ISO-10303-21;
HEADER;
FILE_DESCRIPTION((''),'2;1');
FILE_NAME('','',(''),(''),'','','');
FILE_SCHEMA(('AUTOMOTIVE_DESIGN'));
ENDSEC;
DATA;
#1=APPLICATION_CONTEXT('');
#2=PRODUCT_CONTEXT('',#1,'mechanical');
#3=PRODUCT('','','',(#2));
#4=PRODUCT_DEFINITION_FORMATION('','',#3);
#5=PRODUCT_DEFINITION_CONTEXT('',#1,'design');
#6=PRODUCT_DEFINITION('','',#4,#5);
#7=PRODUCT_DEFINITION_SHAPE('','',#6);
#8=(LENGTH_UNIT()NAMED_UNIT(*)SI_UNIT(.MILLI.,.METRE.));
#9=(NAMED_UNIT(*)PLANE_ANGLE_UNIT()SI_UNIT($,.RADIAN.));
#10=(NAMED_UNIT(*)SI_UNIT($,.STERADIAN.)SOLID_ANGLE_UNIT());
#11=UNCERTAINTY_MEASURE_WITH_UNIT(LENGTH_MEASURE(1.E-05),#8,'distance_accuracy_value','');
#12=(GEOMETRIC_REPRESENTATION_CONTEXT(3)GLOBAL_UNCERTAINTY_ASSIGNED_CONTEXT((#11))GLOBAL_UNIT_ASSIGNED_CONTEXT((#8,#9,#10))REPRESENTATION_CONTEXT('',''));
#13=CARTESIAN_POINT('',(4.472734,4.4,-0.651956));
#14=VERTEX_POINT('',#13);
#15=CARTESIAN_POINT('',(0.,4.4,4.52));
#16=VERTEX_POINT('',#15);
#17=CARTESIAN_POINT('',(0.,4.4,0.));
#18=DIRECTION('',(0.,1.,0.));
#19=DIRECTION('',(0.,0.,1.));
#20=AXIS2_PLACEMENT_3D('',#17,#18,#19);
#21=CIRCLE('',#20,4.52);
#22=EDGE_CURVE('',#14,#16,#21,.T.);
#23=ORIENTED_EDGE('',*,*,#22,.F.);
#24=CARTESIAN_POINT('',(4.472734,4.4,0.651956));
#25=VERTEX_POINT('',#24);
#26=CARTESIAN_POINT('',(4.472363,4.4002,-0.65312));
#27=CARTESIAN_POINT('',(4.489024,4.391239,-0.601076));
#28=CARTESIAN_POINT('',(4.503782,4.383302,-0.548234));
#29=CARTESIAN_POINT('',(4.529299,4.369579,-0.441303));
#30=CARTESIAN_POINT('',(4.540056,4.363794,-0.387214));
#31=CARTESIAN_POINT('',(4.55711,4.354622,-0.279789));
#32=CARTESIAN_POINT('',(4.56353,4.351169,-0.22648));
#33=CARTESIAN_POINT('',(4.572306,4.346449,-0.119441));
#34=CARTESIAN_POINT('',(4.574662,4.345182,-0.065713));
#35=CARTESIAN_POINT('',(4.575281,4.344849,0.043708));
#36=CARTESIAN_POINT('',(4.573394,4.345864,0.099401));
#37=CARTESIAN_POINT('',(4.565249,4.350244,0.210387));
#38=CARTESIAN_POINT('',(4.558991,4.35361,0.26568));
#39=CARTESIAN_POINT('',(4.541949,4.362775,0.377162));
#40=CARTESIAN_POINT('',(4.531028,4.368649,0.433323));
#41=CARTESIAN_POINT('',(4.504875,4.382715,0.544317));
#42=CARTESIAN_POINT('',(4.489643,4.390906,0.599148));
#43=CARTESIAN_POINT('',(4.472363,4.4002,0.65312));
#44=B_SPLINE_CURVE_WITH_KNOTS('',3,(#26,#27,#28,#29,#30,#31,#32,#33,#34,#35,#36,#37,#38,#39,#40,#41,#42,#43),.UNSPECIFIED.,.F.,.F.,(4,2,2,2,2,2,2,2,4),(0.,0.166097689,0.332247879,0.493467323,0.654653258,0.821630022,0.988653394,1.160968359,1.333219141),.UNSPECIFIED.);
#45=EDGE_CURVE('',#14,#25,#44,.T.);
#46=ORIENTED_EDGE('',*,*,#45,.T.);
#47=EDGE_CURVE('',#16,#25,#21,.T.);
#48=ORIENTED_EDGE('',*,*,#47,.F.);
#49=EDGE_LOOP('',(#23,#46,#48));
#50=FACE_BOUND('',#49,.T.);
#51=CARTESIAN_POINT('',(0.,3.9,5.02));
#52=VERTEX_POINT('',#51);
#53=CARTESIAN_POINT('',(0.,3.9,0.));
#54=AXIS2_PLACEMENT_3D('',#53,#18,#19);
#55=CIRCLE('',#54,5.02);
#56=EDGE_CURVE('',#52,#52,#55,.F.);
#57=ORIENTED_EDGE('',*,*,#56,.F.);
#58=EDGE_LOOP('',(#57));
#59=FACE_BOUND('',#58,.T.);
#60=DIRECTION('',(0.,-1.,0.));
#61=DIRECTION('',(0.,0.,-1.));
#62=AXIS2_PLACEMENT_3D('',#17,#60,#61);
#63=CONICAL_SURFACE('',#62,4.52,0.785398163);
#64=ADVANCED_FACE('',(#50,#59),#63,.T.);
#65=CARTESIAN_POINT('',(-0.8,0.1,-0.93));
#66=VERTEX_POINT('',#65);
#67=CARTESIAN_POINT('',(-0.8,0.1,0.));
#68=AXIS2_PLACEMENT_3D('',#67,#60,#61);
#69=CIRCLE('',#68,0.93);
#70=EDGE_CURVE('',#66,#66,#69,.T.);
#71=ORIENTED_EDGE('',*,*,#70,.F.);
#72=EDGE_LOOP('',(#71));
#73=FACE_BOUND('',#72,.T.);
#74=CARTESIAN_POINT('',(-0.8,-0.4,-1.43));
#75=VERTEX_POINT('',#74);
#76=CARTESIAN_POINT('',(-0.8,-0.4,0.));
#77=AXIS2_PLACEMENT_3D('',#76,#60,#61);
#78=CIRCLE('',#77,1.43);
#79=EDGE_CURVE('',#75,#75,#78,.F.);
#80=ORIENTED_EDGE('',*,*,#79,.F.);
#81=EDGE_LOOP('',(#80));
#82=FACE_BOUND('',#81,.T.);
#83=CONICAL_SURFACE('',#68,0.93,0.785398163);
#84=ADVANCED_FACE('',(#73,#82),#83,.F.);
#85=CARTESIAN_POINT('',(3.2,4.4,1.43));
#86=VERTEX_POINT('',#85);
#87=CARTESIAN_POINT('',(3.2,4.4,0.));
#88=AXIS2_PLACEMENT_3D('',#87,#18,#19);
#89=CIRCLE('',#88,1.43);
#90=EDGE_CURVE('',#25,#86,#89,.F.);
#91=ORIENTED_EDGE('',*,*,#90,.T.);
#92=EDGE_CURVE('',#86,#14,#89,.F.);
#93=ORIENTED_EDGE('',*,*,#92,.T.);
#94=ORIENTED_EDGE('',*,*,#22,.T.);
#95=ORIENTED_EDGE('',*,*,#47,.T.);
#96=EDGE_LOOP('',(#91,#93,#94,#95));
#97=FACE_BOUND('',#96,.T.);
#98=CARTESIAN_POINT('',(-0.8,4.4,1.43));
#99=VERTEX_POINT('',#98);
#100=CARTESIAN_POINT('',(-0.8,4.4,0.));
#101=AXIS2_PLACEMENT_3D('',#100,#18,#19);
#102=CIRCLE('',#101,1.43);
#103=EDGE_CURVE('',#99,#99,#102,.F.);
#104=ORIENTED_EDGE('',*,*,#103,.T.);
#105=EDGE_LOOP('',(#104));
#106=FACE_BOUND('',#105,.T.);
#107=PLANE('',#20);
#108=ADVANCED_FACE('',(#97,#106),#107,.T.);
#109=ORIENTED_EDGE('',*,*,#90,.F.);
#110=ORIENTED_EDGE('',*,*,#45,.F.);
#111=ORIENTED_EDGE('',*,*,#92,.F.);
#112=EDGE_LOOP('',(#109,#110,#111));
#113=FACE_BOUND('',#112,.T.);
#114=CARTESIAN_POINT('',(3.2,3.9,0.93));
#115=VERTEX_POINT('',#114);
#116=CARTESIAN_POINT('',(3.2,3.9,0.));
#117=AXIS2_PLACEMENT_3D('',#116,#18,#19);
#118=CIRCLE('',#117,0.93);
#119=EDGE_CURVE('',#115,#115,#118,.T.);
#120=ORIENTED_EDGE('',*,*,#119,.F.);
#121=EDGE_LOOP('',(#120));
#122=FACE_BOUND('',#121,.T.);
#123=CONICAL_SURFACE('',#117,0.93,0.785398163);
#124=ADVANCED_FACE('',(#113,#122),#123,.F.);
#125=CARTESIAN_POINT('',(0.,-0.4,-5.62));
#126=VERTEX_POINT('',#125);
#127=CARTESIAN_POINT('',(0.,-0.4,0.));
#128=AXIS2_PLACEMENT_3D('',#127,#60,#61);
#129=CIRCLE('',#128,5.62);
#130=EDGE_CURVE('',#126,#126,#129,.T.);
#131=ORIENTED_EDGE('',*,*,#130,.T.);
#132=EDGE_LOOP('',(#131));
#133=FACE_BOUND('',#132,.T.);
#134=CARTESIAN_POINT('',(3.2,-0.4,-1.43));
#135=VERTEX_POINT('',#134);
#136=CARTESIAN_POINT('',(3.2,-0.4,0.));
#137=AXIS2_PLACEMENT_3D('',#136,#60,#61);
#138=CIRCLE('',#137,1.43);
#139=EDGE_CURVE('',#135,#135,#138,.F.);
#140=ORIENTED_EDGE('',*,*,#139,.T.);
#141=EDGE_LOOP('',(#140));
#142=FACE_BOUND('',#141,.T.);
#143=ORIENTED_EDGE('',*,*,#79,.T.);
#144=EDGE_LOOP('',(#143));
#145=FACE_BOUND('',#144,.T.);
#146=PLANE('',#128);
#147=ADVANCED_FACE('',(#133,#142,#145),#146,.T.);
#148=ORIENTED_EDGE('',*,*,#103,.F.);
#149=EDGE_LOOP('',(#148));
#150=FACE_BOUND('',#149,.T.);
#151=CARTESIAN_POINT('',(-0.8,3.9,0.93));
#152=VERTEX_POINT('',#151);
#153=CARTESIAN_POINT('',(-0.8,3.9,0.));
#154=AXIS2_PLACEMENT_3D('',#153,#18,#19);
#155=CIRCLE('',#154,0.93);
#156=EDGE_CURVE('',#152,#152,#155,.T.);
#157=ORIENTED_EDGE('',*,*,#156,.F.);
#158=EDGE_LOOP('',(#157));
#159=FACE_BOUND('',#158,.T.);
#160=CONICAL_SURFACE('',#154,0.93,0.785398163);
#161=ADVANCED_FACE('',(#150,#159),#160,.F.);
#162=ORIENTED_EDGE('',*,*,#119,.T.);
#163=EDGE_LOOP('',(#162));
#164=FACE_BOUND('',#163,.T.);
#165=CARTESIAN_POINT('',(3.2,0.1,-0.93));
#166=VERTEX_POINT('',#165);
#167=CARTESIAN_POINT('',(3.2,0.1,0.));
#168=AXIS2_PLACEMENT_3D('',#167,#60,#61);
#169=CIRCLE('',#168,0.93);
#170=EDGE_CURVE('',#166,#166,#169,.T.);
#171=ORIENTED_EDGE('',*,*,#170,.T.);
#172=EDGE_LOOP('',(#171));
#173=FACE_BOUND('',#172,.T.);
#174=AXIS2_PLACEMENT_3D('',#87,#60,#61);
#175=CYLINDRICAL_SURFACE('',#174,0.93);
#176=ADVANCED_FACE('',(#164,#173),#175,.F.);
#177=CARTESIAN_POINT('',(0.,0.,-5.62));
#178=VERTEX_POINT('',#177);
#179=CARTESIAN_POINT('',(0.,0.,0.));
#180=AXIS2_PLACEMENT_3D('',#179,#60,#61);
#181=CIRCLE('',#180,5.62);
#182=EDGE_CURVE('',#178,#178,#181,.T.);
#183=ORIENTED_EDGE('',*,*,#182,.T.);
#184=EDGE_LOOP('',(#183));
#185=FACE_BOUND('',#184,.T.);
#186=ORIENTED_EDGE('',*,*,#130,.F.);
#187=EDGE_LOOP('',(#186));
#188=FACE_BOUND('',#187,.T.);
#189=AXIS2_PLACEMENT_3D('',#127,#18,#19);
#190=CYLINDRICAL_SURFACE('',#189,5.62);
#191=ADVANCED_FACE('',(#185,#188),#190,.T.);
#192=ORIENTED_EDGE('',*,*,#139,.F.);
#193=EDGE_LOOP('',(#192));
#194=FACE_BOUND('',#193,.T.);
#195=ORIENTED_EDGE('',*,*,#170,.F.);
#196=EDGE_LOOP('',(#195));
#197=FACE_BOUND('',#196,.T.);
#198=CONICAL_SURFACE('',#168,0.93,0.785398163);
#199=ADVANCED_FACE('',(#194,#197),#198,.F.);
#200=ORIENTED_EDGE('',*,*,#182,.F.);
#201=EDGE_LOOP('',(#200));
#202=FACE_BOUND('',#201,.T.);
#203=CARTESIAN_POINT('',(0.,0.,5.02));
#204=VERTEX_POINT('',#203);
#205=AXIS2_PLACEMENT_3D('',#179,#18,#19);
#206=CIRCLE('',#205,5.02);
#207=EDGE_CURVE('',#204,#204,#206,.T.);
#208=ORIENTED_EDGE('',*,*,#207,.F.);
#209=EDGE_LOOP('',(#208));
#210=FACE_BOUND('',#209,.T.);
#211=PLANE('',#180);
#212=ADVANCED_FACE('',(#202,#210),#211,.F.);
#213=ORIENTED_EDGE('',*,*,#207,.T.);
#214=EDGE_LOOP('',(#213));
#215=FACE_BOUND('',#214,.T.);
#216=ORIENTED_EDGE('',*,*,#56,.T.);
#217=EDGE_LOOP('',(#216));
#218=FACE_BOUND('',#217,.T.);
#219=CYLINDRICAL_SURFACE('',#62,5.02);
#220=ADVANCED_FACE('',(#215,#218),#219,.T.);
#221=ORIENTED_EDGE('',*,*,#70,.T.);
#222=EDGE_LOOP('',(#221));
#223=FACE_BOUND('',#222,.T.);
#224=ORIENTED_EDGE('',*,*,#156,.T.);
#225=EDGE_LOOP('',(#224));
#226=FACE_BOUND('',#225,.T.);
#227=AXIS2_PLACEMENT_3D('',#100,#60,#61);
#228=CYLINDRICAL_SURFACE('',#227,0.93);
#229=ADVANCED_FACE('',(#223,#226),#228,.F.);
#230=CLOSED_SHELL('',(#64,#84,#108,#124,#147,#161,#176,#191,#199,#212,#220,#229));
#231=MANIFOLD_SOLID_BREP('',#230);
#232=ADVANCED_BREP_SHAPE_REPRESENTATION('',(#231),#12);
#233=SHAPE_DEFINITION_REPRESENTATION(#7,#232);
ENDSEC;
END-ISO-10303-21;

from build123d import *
from build123d.topology import SkipClean

# Parameters (mm, degrees)
SKETCH_1_R      = 5.02
SKETCH_1_R_2    = 0.93
EXTRUDE_1_DEPTH = 4.4
EXTRUDE_START   = 0.4
SKETCH_3_R      = 5.62
SKETCH_3_R_2    = 0.93
EXTRUDE_2_DEPTH = 0.4
CHAMFER_1_SIZE  = 0.5


with BuildPart() as part:
    # 草图1 → 凸台-拉伸1 (new body)
    with BuildSketch(Plane(origin=(0, 0, 0), x_dir=(1, 0, 0), z_dir=(0, 1, 0))):
        with Locations(Location((0, 0, 0), (0, 0, 270))):
            Circle(SKETCH_1_R)
        with Locations(Location((3.2, 0, 0), (0, 0, 270))):
            Circle(SKETCH_1_R_2, mode=Mode.SUBTRACT)
        with Locations(Location((-0.8, 0, 0), (0, 0, 90))):
            Circle(SKETCH_1_R_2, mode=Mode.SUBTRACT)
    extrude(amount=EXTRUDE_1_DEPTH)

    # 草图3 → 凸台-拉伸2 (add)
    with SkipClean():  # the faces are left unmerged after this step: merging them gives an invalid solid
        with BuildSketch(Plane.XZ.offset(EXTRUDE_START)):
            with Locations(Location((0, 0, 0), (0, 0, 270))):
                Circle(SKETCH_3_R)
            with Locations(Location((3.2, 0, 0), (0, 0, 270))):
                Circle(SKETCH_3_R_2, mode=Mode.SUBTRACT)
            with Locations(Location((-0.8, 0, 0), (0, 0, 270))):
                Circle(SKETCH_3_R_2, mode=Mode.SUBTRACT)
        extrude(amount=-EXTRUDE_2_DEPTH)

    # 倒角1
    # the kernel refuses this chamfer: 0.5 mm, written as the material it takes off along each edge
    with BuildSketch(Plane(origin=(3.2, -0.4, 0), x_dir=(0, 0, -1), z_dir=(-1, 0, 0))) as chamfer_1_piece_1:
        Polygon((0.93 + CHAMFER_1_SIZE, 0), (0.93, -CHAMFER_1_SIZE), (0.93, 0), align=None)
    revolve(axis=Axis((3.2, -0.4, 0), (0, -1, 0)), mode=Mode.SUBTRACT)
    with BuildSketch(Plane(origin=(-0.8, -0.4, 0), x_dir=(0, 0, -1), z_dir=(-1, 0, 0))) as chamfer_1_piece_2:
        Polygon((0.93 + CHAMFER_1_SIZE, 0), (0.93, -CHAMFER_1_SIZE), (0.93, 0), align=None)
    revolve(axis=Axis((-0.8, -0.4, 0), (0, -1, 0)), mode=Mode.SUBTRACT)
    with BuildSketch(Plane(origin=(0, 4.4, 0), x_dir=(0, 0, 1), z_dir=(-1, 0, 0))) as chamfer_1_piece_3:
        Polygon((5.02, -CHAMFER_1_SIZE), (5.02 - CHAMFER_1_SIZE, 0), (5.02, 0), align=None)
    revolve(axis=Axis((0, 4.4, 0), (0, 1, 0)), mode=Mode.SUBTRACT)
    with BuildSketch(Plane(origin=(3.2, 4.4, 0), x_dir=(0, 0, 1), z_dir=(-1, 0, 0))) as chamfer_1_piece_4:
        Polygon((0.93 + CHAMFER_1_SIZE, 0), (0.93, -CHAMFER_1_SIZE), (0.93, 0), align=None)
    revolve(axis=Axis((3.2, 4.4, 0), (0, 1, 0)), mode=Mode.SUBTRACT)
    with BuildSketch(Plane(origin=(-0.8, 4.4, 0), x_dir=(0, 0, -1), z_dir=(1, 0, 0))) as chamfer_1_piece_5:
        Polygon((0.93 + CHAMFER_1_SIZE, 0), (0.93, -CHAMFER_1_SIZE), (0.93, 0), align=None)
    revolve(axis=Axis((-0.8, 4.4, 0), (0, 1, 0)), mode=Mode.SUBTRACT)


solid = part.part
